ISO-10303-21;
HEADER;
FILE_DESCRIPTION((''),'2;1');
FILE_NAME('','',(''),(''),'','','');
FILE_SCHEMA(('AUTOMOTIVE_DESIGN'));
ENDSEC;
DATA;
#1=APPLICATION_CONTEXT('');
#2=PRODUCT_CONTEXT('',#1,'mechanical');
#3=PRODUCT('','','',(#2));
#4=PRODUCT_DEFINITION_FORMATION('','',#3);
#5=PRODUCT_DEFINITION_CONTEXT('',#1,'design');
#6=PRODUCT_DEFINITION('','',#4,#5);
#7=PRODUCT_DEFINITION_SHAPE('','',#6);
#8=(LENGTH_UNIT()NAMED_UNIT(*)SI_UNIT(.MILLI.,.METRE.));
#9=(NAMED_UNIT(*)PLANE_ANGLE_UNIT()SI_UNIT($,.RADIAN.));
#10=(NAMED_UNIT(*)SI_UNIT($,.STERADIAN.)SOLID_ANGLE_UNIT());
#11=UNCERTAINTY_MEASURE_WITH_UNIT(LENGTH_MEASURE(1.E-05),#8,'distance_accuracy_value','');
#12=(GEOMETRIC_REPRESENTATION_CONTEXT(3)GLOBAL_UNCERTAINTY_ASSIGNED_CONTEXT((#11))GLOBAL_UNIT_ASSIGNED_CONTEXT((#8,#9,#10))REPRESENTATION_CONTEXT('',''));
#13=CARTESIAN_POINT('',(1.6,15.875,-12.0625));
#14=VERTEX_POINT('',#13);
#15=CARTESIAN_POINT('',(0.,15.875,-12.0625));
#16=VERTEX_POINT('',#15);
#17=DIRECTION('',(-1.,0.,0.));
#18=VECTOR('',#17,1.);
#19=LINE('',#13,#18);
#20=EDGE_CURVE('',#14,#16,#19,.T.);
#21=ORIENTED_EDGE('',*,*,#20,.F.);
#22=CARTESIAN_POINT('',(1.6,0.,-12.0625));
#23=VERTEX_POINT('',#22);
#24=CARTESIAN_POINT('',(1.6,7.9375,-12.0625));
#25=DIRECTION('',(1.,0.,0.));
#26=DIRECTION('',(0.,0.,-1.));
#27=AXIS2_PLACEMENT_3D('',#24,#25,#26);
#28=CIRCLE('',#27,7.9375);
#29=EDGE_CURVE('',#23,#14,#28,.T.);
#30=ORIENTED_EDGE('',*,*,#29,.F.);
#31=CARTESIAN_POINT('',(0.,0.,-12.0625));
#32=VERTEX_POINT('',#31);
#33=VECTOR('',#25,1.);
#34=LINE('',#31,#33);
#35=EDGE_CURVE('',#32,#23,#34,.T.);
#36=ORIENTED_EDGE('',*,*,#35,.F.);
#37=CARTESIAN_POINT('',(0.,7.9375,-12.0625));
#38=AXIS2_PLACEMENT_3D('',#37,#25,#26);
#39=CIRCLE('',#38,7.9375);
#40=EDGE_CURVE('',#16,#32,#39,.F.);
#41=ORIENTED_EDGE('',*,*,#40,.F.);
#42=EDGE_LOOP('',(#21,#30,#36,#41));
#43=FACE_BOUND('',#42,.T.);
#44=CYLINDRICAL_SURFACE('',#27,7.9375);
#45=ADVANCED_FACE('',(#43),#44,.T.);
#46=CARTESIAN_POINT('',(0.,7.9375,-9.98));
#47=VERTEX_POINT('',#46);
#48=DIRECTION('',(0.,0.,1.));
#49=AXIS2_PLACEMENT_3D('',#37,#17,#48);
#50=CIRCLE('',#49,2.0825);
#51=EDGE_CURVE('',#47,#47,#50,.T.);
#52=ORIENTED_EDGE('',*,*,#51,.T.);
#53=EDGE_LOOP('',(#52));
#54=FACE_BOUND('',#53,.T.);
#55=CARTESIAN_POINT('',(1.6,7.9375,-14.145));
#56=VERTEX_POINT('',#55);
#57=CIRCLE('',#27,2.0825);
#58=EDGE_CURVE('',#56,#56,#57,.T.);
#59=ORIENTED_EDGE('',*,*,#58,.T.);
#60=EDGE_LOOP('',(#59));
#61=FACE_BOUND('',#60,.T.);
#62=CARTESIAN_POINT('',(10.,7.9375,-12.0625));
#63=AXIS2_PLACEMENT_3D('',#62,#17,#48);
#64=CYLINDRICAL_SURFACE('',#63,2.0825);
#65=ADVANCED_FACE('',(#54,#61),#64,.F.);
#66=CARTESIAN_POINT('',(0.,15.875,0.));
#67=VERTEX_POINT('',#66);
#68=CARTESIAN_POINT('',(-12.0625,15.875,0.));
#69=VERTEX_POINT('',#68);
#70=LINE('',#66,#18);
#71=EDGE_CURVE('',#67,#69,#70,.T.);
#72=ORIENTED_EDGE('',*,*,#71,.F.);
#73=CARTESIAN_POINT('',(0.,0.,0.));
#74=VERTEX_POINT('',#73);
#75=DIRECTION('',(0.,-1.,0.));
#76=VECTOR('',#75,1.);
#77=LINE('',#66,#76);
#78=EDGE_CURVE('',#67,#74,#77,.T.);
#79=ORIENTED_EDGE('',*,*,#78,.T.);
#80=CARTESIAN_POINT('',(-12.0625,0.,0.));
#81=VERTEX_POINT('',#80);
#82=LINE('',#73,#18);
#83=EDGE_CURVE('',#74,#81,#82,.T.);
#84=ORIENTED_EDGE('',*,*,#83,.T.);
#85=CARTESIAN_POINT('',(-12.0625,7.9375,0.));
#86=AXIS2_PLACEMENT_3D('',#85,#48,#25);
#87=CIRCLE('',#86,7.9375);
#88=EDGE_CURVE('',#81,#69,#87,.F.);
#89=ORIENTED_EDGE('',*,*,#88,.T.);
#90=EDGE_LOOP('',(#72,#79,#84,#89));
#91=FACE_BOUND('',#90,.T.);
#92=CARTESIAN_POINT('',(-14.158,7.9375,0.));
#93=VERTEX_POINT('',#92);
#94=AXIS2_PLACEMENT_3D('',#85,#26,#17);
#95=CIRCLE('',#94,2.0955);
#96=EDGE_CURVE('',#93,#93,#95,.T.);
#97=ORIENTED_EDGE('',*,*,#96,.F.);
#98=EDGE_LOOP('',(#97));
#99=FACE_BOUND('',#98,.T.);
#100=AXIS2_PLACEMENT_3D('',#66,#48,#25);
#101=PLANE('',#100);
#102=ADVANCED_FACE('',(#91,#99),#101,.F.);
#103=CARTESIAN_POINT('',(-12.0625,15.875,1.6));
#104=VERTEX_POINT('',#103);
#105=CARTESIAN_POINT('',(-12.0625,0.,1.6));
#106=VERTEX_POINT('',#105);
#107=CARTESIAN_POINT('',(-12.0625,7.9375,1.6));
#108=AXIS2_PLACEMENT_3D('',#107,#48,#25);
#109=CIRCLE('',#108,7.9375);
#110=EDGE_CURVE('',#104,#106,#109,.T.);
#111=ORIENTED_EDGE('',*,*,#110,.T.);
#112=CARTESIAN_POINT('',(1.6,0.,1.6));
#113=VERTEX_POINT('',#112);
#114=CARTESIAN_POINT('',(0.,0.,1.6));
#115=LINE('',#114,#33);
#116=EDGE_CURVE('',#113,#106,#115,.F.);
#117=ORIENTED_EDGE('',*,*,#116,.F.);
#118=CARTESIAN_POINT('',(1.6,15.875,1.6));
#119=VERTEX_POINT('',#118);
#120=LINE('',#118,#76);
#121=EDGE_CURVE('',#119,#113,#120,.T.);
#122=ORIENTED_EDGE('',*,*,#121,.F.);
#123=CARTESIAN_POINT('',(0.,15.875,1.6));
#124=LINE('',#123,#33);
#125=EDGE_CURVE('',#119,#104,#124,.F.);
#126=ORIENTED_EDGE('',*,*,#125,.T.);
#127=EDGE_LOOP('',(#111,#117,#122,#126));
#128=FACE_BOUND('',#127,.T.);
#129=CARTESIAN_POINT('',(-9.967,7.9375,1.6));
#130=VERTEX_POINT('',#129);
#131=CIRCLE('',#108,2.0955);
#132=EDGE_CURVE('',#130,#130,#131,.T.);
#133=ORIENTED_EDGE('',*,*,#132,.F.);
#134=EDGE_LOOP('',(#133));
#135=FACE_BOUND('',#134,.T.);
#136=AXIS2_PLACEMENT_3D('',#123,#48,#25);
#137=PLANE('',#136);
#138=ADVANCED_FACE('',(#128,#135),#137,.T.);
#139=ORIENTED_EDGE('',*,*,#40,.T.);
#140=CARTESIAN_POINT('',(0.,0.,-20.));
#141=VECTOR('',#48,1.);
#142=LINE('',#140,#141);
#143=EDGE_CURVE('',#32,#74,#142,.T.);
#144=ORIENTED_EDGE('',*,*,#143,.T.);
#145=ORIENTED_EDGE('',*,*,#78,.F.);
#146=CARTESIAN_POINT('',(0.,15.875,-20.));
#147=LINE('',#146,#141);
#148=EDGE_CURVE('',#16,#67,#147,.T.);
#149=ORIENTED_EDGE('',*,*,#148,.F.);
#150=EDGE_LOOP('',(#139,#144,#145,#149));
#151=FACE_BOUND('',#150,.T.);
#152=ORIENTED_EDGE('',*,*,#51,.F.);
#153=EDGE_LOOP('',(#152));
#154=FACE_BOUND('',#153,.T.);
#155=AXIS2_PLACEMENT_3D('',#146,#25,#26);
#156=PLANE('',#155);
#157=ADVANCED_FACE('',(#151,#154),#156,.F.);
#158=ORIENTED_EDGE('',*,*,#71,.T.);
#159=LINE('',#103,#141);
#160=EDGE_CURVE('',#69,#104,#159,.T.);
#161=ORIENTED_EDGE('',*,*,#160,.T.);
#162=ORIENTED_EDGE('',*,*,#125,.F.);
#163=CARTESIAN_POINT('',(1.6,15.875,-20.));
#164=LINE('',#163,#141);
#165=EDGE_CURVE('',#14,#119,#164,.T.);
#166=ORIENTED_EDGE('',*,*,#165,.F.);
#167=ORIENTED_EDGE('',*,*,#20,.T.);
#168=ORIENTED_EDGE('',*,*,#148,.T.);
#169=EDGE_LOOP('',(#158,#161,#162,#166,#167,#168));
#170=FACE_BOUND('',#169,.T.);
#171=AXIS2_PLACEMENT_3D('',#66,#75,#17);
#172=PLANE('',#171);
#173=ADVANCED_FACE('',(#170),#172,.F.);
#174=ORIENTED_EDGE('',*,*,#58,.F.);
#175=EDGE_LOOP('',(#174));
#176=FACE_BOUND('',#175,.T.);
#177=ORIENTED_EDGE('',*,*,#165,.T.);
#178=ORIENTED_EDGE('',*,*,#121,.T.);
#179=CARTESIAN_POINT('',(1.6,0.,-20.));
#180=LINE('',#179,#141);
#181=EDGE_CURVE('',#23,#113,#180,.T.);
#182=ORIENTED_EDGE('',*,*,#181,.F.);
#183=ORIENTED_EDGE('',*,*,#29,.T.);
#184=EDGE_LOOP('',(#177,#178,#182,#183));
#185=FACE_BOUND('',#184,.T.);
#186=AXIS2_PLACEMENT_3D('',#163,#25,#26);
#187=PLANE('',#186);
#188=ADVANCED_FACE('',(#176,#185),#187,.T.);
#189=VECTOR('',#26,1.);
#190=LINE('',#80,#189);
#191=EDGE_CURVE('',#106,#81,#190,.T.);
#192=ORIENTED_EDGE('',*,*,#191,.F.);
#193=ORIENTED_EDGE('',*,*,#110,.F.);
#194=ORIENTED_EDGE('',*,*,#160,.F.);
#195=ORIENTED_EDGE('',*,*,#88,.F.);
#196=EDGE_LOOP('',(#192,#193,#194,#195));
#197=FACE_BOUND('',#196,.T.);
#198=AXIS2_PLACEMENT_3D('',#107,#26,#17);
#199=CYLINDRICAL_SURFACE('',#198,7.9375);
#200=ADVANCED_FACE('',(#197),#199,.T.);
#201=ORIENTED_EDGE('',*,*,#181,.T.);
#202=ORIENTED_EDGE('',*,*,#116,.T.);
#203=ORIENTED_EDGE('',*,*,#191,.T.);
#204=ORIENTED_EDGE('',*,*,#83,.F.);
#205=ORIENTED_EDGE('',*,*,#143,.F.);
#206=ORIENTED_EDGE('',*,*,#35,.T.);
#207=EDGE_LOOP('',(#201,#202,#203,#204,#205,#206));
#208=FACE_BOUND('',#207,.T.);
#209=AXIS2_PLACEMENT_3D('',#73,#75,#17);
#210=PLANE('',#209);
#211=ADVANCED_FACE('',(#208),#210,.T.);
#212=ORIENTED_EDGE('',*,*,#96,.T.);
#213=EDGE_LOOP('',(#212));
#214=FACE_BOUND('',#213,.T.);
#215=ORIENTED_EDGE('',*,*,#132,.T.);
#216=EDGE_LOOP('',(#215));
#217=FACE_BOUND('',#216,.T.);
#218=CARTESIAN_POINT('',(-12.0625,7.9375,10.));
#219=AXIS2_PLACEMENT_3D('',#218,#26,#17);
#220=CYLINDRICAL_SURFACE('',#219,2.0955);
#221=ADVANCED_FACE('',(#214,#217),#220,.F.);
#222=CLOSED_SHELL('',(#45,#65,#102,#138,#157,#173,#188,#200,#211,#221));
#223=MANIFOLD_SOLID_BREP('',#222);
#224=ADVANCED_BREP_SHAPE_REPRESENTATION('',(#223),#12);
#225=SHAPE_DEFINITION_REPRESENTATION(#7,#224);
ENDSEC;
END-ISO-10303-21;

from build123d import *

# Parameters (mm, degrees)
EXTRUDE_THIN1_DEPTH = 15.875
FILLET1_RADIUS      = 7.9375
FILLET1_LENGTH      = 1.6
FILLET2_RADIUS      = 7.9375
FILLET2_LENGTH      = 1.6
SKETCH2_R           = 2.0825
CUT_EXTRUDE1_DEPTH  = 10
SKETCH3_R           = 2.0955
CUT_EXTRUDE2_DEPTH  = 10


with BuildPart() as part:
    # Sketch1 → Extrude-Thin1 (new body)
    with BuildSketch(Plane(origin=(0, 0, 0), x_dir=(1, 0, 0), z_dir=(0, 1, 0))):
        Polygon((0, 20), (0, 0), (-20, 0), (-20, -1.6), (1.6, -1.6), (1.6, 20), align=None)
    extrude(amount=EXTRUDE_THIN1_DEPTH)

    # Fillet1: full round fillet: the end face becomes a half cylinder, R = half its width
    fillet1_face = Plane((0.8, 7.9375, -20), x_dir=(1, 0, 0), z_dir=(0, 0, -1))  # on the end face: x along it, z out of the body
    fillet1_slab = fillet1_face.offset(-FILLET1_RADIUS / 2) * Box(FILLET1_LENGTH, 2 * FILLET1_RADIUS, FILLET1_RADIUS, mode=Mode.PRIVATE)  # the body's end, R deep
    fillet1_round = Plane((0.8, 7.9375, -12.0625), x_dir=(0, 0, -1), z_dir=(1, 0, 0)) * Cylinder(FILLET1_RADIUS, FILLET1_LENGTH, mode=Mode.PRIVATE)  # its axis R under the face
    add(fillet1_slab - fillet1_round, mode=Mode.SUBTRACT)

    # Fillet2: full round fillet: the end face becomes a half cylinder, R = half its width
    fillet2_face = Plane((-20, 7.9375, 0.8), x_dir=(0, 0, 1), z_dir=(-1, 0, 0))  # on the end face: x along it, z out of the body
    fillet2_slab = fillet2_face.offset(-FILLET2_RADIUS / 2) * Box(FILLET2_LENGTH, 2 * FILLET2_RADIUS, FILLET2_RADIUS, mode=Mode.PRIVATE)  # the body's end, R deep
    fillet2_round = Plane((-12.0625, 7.9375, 0.8), x_dir=(-1, 0, 0), z_dir=(0, 0, 1)) * Cylinder(FILLET2_RADIUS, FILLET2_LENGTH, mode=Mode.PRIVATE)  # its axis R under the face
    add(fillet2_slab - fillet2_round, mode=Mode.SUBTRACT)

    # Sketch2 → Cut-Extrude1 (cut)
    with BuildSketch(Plane.ZY):
        with Locations((-12.0625, 7.9375)):
            Circle(SKETCH2_R)
    extrude(amount=-CUT_EXTRUDE1_DEPTH, mode=Mode.SUBTRACT)

    # Sketch3 → Cut-Extrude2 (cut)
    with BuildSketch(Plane(origin=(0, 0, 0), x_dir=(-1, 0, 0), z_dir=(0, 0, -1))):
        with Locations((12.0625, 7.9375)):
            Circle(SKETCH3_R)
    extrude(amount=-CUT_EXTRUDE2_DEPTH, mode=Mode.SUBTRACT)


solid = part.part
